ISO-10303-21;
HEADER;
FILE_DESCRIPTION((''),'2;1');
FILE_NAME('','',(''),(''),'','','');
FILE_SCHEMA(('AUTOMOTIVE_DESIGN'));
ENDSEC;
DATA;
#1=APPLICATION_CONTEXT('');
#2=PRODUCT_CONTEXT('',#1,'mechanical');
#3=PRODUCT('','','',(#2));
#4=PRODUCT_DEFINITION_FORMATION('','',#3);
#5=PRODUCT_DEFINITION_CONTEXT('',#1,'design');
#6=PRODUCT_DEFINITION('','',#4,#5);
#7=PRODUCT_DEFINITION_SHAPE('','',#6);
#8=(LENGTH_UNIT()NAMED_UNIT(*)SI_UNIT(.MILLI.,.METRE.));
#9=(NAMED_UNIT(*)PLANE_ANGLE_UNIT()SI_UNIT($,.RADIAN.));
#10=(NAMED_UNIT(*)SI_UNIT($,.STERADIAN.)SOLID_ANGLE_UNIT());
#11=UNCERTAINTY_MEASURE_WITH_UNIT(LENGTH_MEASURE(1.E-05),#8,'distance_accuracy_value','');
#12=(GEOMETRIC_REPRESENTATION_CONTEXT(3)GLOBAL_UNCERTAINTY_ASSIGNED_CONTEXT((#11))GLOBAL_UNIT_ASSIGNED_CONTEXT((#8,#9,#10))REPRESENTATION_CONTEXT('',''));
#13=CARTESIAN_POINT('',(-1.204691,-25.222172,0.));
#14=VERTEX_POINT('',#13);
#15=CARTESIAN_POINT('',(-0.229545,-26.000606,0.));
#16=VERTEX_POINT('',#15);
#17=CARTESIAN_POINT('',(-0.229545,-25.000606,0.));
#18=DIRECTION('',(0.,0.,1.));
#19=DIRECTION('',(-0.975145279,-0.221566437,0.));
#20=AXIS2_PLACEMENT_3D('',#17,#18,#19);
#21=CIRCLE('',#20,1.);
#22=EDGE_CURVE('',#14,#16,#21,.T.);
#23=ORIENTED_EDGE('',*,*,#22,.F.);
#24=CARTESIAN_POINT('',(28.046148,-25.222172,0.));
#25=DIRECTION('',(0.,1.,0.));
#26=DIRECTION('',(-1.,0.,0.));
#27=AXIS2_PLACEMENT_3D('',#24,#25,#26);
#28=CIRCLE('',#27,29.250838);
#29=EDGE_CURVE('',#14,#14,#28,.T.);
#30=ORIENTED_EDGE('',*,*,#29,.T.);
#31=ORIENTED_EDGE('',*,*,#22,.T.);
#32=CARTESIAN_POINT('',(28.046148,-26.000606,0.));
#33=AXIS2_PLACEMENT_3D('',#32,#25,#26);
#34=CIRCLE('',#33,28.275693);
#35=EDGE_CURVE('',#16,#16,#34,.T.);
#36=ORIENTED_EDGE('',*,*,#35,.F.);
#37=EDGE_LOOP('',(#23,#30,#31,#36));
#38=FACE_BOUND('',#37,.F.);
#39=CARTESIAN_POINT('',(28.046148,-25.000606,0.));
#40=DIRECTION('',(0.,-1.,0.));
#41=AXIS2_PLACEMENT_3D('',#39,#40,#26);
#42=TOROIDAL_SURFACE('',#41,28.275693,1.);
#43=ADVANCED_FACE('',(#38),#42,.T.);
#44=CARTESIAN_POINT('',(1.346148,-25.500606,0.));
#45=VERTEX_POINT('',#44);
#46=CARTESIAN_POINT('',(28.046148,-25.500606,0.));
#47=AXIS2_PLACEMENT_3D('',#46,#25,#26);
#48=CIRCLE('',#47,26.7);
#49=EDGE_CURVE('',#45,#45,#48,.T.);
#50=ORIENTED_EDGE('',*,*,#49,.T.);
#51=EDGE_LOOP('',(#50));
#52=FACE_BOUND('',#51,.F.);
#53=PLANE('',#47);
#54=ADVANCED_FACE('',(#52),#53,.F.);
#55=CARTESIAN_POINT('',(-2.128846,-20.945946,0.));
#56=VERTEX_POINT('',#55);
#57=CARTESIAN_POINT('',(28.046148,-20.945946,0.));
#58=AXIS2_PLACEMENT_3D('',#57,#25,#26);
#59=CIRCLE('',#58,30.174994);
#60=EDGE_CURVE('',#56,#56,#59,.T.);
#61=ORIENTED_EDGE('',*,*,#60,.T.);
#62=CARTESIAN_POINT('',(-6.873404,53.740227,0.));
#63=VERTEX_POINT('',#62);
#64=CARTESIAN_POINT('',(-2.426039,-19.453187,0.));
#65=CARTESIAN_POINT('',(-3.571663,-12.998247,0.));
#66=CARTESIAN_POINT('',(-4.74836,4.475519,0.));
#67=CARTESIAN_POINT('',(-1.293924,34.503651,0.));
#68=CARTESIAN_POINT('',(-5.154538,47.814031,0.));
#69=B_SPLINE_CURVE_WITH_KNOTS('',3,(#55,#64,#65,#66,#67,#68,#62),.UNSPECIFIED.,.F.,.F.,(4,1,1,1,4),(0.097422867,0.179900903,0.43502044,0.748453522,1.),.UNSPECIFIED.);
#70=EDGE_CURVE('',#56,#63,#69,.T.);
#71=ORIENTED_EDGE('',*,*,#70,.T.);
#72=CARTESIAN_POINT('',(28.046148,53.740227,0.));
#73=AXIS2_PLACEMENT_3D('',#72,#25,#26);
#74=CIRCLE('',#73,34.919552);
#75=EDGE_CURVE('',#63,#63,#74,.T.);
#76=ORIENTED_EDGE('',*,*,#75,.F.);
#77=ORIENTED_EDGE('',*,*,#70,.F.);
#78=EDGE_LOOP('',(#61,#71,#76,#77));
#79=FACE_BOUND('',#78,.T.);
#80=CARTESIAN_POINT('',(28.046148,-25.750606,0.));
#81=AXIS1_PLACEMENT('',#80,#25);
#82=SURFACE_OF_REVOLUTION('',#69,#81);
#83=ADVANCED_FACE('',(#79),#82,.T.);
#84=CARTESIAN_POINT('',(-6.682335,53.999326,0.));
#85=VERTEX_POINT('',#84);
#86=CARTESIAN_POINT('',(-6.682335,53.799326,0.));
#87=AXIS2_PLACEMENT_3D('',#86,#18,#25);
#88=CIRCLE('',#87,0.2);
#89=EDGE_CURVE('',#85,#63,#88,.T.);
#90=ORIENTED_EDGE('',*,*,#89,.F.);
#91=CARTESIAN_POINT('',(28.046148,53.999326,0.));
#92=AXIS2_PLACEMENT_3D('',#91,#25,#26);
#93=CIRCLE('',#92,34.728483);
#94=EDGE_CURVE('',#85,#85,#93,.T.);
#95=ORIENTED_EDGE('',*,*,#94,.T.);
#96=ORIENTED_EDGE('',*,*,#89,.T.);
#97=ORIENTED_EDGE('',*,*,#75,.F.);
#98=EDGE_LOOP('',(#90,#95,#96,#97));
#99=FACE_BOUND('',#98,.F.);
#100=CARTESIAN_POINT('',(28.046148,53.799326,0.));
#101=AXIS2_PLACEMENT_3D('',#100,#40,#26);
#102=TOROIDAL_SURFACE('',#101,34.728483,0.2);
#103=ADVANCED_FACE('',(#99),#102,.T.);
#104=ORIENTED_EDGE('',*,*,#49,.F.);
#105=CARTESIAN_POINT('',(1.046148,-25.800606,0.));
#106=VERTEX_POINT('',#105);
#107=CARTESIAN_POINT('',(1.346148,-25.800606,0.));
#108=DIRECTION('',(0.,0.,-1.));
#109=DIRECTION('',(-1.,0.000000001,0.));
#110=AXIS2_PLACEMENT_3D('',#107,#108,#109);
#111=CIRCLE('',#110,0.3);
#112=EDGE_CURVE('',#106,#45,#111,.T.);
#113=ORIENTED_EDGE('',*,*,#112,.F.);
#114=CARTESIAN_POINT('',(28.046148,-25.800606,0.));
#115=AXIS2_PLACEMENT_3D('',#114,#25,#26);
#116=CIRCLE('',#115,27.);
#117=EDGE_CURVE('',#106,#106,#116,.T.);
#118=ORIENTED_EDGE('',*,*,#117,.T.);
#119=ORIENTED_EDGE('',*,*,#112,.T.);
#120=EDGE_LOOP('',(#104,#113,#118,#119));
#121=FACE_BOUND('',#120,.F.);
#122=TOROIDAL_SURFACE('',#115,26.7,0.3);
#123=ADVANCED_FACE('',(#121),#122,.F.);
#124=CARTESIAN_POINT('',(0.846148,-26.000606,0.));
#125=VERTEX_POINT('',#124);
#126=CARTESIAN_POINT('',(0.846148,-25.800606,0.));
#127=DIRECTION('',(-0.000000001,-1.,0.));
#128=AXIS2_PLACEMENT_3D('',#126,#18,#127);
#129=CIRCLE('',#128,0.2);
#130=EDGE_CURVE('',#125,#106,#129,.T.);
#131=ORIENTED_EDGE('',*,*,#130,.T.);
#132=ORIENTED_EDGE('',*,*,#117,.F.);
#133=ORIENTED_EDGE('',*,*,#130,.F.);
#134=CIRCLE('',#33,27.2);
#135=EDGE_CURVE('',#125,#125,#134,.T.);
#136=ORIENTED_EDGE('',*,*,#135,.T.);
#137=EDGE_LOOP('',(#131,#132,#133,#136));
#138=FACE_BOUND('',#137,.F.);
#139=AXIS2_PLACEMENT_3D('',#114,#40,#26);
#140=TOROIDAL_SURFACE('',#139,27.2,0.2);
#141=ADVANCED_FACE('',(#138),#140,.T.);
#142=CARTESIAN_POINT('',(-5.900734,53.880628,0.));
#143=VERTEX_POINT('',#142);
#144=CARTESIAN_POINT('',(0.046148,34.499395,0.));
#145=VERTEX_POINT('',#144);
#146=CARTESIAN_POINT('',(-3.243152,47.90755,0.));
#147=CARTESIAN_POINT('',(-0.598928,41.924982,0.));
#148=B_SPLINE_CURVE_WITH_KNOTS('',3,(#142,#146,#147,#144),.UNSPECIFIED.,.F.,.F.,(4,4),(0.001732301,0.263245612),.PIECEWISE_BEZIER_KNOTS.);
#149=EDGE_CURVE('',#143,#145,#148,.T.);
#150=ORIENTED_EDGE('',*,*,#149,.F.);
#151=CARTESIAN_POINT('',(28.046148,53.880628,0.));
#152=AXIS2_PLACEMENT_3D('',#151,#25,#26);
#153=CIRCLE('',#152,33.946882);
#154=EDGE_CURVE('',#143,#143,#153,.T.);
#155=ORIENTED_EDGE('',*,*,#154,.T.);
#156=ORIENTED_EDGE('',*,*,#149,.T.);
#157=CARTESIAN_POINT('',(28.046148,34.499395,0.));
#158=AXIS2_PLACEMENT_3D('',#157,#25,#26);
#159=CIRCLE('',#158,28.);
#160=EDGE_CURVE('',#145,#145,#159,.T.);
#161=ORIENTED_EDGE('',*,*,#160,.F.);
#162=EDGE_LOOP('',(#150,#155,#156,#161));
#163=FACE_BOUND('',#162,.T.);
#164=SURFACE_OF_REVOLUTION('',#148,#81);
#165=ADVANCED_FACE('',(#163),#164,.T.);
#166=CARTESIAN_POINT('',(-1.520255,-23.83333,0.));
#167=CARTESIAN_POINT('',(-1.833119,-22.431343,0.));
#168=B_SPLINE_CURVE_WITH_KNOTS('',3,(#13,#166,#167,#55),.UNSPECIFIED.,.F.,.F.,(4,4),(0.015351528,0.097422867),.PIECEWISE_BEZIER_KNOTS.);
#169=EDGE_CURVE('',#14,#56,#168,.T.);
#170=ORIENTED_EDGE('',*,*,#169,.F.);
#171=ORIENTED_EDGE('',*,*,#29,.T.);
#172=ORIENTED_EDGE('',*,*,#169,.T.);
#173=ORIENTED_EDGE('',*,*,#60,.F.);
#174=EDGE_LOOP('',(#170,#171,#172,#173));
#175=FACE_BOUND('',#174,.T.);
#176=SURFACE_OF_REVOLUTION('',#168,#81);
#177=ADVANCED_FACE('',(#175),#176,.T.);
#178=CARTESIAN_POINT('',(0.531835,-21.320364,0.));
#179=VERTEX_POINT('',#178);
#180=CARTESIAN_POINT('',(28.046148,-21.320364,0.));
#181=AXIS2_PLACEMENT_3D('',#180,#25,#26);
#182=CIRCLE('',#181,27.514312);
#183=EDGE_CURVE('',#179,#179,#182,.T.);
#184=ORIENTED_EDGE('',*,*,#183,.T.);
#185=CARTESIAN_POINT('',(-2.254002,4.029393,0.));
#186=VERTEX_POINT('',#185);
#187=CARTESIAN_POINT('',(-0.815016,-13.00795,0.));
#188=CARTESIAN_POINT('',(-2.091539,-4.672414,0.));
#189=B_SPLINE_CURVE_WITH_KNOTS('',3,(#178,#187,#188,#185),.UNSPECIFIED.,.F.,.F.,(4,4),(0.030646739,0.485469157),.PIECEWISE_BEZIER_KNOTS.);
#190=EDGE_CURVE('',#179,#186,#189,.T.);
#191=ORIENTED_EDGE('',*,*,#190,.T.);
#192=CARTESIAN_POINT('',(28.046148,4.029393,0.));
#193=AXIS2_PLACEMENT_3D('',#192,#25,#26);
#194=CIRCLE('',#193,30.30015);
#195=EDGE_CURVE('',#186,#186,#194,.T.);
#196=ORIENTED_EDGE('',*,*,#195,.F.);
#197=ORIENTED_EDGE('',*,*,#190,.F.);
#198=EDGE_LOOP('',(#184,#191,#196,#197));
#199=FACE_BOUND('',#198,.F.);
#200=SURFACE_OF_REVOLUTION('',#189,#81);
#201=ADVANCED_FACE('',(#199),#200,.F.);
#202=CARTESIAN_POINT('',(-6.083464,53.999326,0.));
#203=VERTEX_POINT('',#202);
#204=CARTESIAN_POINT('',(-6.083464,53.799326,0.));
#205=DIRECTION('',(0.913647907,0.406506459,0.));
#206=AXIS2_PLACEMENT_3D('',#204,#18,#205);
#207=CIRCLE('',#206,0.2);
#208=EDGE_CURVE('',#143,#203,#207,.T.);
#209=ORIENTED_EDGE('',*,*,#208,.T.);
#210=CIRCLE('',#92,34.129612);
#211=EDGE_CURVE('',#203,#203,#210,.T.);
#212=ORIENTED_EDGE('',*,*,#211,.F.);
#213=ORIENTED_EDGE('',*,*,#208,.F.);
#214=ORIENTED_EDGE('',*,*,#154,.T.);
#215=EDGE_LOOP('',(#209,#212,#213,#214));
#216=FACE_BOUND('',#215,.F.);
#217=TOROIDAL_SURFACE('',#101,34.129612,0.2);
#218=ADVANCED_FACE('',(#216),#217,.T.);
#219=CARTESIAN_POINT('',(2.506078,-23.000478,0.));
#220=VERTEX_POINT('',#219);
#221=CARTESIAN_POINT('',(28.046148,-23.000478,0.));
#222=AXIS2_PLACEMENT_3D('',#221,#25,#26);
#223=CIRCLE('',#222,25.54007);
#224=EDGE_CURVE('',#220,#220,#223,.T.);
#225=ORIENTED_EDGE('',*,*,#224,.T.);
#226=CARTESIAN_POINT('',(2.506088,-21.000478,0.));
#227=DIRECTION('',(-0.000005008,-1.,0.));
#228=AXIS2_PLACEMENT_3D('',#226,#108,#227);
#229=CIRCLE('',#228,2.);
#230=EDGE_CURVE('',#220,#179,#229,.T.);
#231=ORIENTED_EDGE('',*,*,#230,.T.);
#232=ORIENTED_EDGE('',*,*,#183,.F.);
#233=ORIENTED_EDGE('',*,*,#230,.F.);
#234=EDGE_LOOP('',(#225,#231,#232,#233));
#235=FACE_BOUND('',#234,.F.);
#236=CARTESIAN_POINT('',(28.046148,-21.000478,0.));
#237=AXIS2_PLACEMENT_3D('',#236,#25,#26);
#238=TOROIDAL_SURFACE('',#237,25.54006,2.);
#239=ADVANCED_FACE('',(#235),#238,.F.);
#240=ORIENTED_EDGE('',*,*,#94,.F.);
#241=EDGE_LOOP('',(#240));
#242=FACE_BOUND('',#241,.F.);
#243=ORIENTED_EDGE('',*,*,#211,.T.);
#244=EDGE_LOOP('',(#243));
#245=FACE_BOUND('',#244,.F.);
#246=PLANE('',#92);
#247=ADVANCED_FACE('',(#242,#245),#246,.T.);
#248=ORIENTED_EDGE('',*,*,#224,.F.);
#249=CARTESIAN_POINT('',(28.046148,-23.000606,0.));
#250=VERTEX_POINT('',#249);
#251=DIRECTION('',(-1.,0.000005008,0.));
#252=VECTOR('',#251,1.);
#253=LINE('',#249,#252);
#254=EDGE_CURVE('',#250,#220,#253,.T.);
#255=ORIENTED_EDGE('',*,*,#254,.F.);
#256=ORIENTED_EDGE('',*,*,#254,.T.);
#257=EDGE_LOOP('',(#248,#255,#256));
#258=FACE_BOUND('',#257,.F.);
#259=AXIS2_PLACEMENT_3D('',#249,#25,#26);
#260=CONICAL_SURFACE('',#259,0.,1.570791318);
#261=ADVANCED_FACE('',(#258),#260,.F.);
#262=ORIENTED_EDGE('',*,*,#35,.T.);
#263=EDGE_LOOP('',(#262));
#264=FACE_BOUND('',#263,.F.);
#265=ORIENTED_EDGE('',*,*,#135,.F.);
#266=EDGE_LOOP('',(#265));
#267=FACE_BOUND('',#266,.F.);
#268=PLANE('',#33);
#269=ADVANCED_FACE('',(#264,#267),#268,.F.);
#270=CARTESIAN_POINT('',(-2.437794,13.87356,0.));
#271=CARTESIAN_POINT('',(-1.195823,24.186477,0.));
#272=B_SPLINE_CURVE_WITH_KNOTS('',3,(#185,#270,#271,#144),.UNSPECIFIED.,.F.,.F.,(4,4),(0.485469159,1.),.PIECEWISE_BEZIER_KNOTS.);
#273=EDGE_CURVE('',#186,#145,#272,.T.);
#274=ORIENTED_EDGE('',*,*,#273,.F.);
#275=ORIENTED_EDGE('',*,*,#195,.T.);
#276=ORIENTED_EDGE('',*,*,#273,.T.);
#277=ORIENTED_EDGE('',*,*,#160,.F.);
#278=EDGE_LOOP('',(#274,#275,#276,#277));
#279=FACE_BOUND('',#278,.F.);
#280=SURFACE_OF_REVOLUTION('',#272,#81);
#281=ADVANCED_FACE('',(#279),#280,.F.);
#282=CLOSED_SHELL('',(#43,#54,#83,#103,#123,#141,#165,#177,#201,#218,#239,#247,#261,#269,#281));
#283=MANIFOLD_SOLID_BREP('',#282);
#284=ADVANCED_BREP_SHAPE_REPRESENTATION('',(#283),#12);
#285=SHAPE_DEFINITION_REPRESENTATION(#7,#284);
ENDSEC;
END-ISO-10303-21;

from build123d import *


with BuildPart() as f1:
    # F0 (on Top) → F1 (revolve)
    with BuildSketch(Plane.XY):
        with BuildLine():
            Line((1.3461475165, -25.5006056753), (28.0461475165, -25.5006056753))
            Line((28.0461475165, -25.5006056753), (28.0461475165, -23.0006056753))
            Line((28.0461475165, -23.0006056753), (2.5060778017, -23.0004777587))
            ThreePointArc((2.5060778017, -23.0004777587), (1.2098918631, -22.5235916891), (0.5318353044, -21.3203636915))
            add(Edge.make_bspline(
                [(0.5318353044, -21.3203636915), (-0.8150158739, -13.0079496328), (-2.0915386422, -4.6724136075), (-2.2540024722, 4.0293930826)],
                knots=[0.0306467394, 0.0306467394, 0.0306467394, 0.0306467394, 0.4854691574, 0.4854691574, 0.4854691574, 0.4854691574], degree=3))
            add(Edge.make_bspline(
                [(-2.2540024674, 4.0293931392), (-2.9491607775, -4.0834100782), (-2.6459138796, -14.1064758874), (-2.243888431, -19.5448130064), (-2.1288460014, -20.9459457324)],
                knots=[0.5854099201, 0.5854099201, 0.5854099201, 0.5854099201, 0.8471807154, 0.9488403469, 0.9488403469, 0.9488403469, 0.9488403469], degree=3))
            add(Edge.make_bspline(
                [(-1.2046905869, -25.2221721119), (-1.5202547504, -23.8333295194), (-1.8331186129, -22.4313432856), (-2.1288460014, -20.9459457326)],
                knots=[0.0153515284, 0.0153515284, 0.0153515284, 0.0153515284, 0.0974228675, 0.0974228675, 0.0974228675, 0.0974228675], degree=3))
            ThreePointArc((-1.2046905869, -25.2221721119), (-0.8534177166, -25.7821318862), (-0.2295453084, -26.0006056753))
            Line((-0.2295453084, -26.0006056753), (-0.1538524835, -26.0006056753))
            Line((-0.1538524835, -26.0006056753), (0.0461475165, -26.0006056753))
            Line((0.0461475165, -26.0006056753), (0.8461475165, -26.0006056753))
            ThreePointArc((0.8461475165, -26.0006056753), (0.9875688728, -25.9420270316), (1.0461475165, -25.8006056753))
            ThreePointArc((1.0461475165, -25.8006056753), (1.1340154822, -25.588473641), (1.3461475165, -25.5006056753))
        make_face()
        with BuildLine():
            add(Edge.make_bspline(
                [(-2.2540024674, 4.0293931392), (-2.9491607775, -4.0834100782), (-2.6459138796, -14.1064758874), (-2.243888431, -19.5448130064), (-2.1288460014, -20.9459457324)],
                knots=[0.5854099201, 0.5854099201, 0.5854099201, 0.5854099201, 0.8471807154, 0.9488403469, 0.9488403469, 0.9488403469, 0.9488403469], degree=3))
            add(Edge.make_bspline(
                [(-2.2540024738, 4.0293931678), (-2.4377943101, 13.8735603402), (-1.1958233968, 24.1864774613), (0.0461475165, 34.4993945825)],
                knots=[0.4854691589, 0.4854691589, 0.4854691589, 0.4854691589, 1, 1, 1, 1], degree=3))
            add(Edge.make_bspline(
                [(-5.9007344191, 53.8806275867), (-3.2431522106, 47.9075504763), (-0.5989279583, 41.9249819709), (0.0461475165, 34.4993945825)],
                knots=[0.0017323014, 0.0017323014, 0.0017323014, 0.0017323014, 0.263245612, 0.263245612, 0.263245612, 0.263245612], degree=3))
            ThreePointArc((-5.9007344191, 53.8806275867), (-5.9745150639, 53.9670466848), (-6.0834640006, 53.9993262949))
            Line((-6.0834640006, 53.9993262949), (-6.6823353722, 53.9993262949))
            ThreePointArc((-6.6823353722, 53.9993262949), (-6.8433010525, 53.9180278103), (-6.873404074, 53.7402267925))
            add(Edge.make_bspline(
                [(-2.1288460014, -20.9459457326), (-2.4260388398, -19.4531874284), (-3.5716634781, -12.998246958), (-4.7483602147, 4.4755185853), (-1.2939239656, 34.5036509373), (-5.154538411, 47.8140313282), (-6.873404074, 53.7402267925)],
                knots=[0.0974228675, 0.0974228675, 0.0974228675, 0.0974228675, 0.1799009035, 0.4350204397, 0.748453522, 1, 1, 1, 1], degree=3))
        make_face()
    revolve(axis=Axis((28.0461475165, -25.7506056753, 0), (0, 1, 0)))


solid = f1.part
